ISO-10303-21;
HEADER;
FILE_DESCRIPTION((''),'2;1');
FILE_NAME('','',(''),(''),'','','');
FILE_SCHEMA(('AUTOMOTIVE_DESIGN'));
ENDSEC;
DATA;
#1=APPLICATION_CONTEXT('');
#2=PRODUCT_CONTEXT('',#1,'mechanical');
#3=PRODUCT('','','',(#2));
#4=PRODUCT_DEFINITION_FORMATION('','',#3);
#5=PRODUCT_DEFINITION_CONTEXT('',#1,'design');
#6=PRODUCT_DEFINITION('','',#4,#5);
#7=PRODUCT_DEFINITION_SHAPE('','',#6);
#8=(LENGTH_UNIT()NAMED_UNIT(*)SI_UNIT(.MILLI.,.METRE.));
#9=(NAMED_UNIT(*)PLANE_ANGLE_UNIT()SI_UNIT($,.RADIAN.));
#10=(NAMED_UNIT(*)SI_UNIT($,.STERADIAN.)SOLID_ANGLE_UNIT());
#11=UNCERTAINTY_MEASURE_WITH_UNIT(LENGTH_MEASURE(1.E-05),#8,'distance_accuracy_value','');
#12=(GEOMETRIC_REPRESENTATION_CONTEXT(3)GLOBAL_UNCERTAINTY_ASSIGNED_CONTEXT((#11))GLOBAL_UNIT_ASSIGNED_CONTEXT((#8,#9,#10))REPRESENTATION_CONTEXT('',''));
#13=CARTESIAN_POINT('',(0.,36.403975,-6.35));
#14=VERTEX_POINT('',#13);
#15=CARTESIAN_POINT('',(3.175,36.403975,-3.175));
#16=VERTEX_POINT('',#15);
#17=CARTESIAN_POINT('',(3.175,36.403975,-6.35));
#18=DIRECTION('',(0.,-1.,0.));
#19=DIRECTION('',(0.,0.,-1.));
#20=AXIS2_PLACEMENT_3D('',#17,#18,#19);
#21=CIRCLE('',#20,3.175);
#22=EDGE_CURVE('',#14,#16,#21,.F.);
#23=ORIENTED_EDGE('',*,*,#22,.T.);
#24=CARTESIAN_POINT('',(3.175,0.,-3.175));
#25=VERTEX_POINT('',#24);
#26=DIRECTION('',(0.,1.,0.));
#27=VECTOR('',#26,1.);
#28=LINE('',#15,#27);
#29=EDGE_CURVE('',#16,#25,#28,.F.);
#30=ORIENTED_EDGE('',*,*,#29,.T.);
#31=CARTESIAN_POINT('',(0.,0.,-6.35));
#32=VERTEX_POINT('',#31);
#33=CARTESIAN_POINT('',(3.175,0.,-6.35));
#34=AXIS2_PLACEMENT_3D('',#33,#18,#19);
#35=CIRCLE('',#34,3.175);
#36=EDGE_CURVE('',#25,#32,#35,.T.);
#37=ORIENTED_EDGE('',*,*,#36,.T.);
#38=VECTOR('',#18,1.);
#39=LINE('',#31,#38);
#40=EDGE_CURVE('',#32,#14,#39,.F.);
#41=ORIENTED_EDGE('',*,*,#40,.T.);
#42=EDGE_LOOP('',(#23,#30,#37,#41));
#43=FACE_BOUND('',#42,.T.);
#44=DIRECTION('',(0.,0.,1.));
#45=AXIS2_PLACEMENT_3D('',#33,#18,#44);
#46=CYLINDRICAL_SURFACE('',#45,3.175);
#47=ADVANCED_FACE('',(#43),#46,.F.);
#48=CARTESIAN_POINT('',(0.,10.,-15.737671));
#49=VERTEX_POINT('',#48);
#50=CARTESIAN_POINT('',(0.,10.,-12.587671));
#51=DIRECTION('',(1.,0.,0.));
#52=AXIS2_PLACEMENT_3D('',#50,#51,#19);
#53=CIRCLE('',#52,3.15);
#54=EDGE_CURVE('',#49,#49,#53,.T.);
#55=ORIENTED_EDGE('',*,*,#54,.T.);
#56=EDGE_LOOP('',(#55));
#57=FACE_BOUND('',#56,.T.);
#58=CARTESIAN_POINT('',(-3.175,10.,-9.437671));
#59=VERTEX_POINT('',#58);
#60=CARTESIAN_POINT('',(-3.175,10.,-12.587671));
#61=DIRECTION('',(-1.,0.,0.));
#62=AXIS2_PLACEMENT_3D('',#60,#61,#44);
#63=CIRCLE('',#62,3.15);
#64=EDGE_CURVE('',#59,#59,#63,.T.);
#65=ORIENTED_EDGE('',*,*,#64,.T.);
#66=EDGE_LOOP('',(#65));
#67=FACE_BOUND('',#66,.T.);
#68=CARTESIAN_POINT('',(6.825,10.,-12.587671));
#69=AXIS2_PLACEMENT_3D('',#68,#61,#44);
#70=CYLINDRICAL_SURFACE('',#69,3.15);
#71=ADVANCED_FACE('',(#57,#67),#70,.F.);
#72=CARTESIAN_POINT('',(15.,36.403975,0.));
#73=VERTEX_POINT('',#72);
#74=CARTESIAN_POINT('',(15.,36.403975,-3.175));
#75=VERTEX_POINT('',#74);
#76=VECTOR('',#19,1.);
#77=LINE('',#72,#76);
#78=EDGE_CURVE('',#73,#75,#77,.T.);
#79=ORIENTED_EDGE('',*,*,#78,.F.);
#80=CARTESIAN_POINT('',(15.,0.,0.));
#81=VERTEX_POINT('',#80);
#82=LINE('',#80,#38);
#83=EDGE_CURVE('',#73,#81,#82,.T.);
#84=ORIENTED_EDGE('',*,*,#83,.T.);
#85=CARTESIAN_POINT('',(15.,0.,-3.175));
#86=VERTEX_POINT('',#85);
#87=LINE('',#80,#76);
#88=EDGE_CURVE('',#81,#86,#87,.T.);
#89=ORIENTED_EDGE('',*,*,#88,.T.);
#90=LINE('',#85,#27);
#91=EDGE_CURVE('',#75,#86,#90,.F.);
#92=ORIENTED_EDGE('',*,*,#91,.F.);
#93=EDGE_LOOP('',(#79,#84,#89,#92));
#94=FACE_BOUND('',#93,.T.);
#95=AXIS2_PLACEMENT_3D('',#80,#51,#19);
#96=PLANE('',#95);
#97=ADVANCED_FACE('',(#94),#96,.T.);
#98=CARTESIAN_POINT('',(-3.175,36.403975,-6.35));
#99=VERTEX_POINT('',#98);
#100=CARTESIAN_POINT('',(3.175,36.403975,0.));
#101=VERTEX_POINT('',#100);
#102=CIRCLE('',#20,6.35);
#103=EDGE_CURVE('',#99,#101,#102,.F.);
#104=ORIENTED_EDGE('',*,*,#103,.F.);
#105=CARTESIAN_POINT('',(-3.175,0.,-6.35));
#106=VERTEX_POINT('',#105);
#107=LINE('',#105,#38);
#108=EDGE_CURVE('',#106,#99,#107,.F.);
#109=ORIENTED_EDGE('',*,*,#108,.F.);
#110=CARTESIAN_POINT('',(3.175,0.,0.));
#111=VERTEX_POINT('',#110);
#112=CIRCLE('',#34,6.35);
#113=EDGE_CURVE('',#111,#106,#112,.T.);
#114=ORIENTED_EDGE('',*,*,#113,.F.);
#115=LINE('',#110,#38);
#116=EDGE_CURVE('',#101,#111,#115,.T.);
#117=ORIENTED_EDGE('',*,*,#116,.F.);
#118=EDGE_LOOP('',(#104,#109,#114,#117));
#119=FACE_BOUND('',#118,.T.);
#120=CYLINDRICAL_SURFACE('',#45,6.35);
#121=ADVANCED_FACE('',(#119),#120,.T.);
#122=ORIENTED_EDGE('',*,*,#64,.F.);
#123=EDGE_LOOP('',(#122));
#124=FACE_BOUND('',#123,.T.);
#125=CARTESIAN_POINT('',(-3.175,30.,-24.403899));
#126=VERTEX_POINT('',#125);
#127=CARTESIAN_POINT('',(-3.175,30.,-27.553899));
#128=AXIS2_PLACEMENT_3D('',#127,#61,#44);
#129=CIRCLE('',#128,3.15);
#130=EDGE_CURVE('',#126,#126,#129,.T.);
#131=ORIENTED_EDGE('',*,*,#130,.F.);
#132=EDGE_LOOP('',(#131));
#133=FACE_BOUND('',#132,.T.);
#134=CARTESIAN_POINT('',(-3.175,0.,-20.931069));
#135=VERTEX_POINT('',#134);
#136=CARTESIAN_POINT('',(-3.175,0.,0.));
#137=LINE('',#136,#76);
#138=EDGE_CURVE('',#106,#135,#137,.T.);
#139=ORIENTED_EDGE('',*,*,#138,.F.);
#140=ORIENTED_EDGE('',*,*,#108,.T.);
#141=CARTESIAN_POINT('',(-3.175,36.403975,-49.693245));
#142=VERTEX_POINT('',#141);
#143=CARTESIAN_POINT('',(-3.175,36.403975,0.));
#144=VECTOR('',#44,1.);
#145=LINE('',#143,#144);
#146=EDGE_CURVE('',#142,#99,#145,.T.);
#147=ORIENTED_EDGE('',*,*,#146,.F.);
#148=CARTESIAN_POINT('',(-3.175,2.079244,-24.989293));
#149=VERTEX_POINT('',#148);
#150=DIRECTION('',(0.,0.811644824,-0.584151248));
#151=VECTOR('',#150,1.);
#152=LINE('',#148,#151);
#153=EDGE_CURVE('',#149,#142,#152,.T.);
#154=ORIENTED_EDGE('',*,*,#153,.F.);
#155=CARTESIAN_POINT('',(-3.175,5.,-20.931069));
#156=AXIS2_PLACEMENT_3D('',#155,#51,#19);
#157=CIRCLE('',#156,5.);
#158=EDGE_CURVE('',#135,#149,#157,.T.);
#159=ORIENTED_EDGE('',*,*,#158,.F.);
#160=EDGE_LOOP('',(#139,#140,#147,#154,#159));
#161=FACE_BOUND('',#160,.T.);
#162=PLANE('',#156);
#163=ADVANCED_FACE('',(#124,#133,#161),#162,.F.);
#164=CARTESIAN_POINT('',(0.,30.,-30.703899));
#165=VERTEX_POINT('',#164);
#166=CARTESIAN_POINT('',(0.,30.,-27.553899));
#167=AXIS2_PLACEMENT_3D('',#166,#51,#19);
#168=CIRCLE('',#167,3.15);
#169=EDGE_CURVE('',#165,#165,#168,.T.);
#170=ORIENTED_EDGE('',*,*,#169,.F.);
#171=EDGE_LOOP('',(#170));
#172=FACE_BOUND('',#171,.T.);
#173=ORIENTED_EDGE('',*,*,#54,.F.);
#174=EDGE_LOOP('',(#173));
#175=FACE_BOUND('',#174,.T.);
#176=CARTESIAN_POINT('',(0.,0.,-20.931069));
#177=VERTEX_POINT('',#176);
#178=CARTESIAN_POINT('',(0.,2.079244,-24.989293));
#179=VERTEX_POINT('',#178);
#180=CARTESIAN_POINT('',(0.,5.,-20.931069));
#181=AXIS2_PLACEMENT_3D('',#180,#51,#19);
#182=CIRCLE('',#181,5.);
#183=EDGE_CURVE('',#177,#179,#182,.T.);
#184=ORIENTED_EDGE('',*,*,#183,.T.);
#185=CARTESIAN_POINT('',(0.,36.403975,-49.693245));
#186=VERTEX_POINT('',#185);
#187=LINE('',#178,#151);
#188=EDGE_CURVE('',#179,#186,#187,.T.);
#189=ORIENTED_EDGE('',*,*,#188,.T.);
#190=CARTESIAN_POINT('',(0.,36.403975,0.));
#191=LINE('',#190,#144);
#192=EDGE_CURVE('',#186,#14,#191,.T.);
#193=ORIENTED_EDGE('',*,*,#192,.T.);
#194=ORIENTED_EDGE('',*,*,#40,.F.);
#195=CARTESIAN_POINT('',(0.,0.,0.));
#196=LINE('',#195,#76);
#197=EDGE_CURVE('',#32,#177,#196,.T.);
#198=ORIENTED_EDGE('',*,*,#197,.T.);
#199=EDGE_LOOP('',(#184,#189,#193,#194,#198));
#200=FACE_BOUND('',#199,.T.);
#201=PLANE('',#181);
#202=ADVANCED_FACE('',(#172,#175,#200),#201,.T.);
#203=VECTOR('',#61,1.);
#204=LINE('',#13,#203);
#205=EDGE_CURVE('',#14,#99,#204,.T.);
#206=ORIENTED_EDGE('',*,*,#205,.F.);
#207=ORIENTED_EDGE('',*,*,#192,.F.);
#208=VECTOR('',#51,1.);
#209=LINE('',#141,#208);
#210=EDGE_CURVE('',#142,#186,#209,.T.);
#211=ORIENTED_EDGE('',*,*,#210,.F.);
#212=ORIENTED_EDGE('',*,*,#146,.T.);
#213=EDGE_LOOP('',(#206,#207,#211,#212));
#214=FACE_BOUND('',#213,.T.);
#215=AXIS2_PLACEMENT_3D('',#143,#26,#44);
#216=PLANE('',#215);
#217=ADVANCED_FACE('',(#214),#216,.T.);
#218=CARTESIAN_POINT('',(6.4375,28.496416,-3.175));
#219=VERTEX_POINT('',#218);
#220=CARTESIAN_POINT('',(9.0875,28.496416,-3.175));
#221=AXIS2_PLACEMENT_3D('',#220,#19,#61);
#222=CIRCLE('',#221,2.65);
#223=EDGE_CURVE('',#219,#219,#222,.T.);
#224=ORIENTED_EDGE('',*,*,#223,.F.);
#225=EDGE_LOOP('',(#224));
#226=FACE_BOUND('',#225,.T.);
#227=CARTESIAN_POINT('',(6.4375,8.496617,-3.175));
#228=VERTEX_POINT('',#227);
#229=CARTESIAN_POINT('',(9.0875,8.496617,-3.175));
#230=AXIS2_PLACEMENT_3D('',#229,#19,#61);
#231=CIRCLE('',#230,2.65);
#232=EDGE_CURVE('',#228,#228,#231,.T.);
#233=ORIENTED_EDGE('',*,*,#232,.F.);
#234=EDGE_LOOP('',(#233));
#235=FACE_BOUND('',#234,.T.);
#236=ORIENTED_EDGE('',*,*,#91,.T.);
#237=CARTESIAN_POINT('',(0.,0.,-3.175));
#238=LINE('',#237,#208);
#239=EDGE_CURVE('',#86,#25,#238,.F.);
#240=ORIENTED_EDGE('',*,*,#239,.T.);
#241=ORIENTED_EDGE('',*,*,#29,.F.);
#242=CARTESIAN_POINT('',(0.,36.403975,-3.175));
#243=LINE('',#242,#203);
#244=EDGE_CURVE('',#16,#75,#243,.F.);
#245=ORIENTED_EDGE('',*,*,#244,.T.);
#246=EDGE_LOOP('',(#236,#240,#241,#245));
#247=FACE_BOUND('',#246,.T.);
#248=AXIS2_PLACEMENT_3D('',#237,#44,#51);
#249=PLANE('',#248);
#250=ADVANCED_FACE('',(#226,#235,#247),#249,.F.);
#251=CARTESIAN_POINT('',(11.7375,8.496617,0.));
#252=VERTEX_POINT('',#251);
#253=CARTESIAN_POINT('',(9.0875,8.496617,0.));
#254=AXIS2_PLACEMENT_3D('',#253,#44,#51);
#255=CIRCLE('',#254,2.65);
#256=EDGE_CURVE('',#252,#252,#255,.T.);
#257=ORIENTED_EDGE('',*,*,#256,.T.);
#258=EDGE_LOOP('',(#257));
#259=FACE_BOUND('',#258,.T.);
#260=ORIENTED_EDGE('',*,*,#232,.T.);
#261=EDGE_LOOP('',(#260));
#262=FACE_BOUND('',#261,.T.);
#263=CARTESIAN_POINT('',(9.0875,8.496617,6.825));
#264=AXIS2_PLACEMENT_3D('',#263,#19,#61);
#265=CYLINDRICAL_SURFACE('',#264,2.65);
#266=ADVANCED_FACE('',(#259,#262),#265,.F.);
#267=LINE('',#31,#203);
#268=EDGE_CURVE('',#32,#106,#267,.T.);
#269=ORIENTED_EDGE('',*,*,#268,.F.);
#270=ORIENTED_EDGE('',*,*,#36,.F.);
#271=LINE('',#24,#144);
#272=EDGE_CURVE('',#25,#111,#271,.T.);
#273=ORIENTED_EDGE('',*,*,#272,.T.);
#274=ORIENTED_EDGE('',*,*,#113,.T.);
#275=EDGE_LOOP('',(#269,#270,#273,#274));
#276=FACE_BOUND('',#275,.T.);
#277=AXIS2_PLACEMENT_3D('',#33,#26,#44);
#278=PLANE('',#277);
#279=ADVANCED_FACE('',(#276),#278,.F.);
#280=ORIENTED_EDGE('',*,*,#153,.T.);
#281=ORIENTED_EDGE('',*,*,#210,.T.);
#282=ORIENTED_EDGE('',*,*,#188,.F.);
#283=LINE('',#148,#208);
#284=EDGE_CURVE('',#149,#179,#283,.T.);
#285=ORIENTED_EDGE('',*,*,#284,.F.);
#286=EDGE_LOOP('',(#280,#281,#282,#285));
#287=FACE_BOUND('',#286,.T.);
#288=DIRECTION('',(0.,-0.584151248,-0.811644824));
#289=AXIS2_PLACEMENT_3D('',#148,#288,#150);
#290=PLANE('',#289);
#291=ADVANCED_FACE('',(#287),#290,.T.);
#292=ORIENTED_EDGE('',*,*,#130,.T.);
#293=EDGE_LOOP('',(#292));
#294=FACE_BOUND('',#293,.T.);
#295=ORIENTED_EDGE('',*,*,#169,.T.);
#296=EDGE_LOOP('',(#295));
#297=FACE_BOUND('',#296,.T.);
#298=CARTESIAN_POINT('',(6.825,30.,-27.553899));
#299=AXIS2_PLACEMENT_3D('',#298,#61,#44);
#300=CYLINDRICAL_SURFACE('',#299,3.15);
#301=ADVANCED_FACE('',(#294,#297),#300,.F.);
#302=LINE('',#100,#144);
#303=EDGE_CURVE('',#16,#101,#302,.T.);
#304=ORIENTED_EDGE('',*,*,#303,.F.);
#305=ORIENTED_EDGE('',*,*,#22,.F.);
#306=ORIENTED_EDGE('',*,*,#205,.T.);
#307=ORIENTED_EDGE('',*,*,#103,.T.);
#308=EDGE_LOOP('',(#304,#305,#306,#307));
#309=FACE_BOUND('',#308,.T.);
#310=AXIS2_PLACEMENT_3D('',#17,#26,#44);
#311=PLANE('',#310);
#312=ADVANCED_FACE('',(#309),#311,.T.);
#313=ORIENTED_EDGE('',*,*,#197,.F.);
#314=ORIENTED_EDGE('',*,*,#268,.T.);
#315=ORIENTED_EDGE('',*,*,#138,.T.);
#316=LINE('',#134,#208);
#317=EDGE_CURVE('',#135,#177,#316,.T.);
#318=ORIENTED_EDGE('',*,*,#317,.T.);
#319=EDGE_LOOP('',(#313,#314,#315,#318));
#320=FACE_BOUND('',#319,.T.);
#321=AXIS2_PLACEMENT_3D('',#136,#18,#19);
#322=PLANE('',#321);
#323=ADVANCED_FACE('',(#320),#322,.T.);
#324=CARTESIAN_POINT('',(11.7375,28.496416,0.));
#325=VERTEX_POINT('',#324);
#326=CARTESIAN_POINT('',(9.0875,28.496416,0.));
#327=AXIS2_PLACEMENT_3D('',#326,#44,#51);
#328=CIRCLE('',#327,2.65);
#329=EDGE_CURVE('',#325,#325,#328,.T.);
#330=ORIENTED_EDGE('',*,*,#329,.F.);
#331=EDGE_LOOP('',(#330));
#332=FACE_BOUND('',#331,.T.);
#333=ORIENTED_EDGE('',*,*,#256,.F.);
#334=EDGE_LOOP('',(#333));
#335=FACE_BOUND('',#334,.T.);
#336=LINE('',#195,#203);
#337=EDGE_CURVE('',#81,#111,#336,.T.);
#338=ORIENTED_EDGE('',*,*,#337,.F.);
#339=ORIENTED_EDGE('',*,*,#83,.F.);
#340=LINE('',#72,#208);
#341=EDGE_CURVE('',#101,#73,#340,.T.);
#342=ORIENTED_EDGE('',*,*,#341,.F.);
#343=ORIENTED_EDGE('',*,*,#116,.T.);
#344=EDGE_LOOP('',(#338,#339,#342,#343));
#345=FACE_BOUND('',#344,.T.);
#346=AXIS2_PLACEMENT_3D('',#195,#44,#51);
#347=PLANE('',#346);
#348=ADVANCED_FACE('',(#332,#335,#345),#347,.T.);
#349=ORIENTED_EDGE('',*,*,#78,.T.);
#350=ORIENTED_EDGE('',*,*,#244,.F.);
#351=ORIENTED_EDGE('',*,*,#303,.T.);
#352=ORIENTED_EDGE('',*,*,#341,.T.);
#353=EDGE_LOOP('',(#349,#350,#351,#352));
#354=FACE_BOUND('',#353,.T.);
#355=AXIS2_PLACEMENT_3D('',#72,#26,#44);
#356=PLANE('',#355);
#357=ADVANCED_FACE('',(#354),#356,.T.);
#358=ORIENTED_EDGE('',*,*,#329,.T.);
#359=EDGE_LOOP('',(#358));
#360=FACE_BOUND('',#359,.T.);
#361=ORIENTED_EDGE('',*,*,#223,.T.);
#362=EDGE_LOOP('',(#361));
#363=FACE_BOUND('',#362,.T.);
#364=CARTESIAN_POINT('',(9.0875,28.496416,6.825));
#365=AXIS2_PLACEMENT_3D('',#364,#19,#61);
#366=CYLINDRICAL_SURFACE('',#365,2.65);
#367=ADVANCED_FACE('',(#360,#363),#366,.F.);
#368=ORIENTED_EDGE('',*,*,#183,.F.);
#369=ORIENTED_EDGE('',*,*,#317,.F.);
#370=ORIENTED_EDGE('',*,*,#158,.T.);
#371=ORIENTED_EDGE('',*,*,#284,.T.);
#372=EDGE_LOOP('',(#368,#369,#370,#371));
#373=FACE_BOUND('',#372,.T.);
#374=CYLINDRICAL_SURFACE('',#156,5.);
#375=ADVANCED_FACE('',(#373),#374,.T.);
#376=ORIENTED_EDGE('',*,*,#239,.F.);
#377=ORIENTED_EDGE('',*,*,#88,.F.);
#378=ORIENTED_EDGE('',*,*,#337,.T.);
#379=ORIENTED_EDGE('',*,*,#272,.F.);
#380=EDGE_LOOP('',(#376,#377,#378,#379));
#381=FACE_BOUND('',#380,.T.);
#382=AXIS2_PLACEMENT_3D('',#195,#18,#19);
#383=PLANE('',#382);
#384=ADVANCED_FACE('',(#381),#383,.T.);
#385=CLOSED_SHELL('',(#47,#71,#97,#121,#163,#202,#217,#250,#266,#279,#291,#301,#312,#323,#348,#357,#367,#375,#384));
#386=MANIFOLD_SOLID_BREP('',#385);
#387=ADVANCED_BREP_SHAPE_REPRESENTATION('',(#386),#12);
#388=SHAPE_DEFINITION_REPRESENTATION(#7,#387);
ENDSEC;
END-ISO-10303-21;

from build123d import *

# Parameters (mm, degrees)
BASE_FLANGE1_DEPTH           = 3.175
SKETCH7_R                    = 3.15
CUT_EXTRUDE3_DEPTH           = 10
EDGE_FLANGE1_STRIP_W         = 19.05
EDGE_FLANGE1_STRIP_H         = 3.175
EDGE_FLANGE1_STRIP_CUT_DEPTH = 36.40397533
EDGE_FLANGE1_DEPTH           = 36.40397533
SKETCH12_R                   = 2.65
CUT_EXTRUDE4_DEPTH           = 10


# Sheet-metal steps are written as plain solids
with BuildPart() as part:
    # Sketch2 → Base-Flange1 (new body)
    with BuildSketch(Plane(origin=(0, 0, 0), x_dir=(0, 0, -1), z_dir=(1, 0, 0))):
        with BuildLine():
            Line((0, 0), (0, 36.40397533))
            Line((0, 36.40397533), (49.693245392, 36.40397533))
            Line((49.693245392, 36.40397533), (24.989293369, 2.07924376))
            ThreePointArc((24.989293369, 2.07924376), (23.211005522, 0.550068473), (20.931069251, 0))
            Line((20.931069251, 0), (0, 0))
        make_face()
    extrude(amount=-BASE_FLANGE1_DEPTH)

    # Sketch7 → Cut-Extrude3 (cut)
    with BuildSketch(Plane.ZY.offset(3.175)):
        with Locations((-27.553898694, 30)):
            Circle(SKETCH7_R)
        with Locations((-12.587671369, 10)):
            Circle(SKETCH7_R)
    extrude(amount=-CUT_EXTRUDE3_DEPTH, mode=Mode.SUBTRACT)

    # Edge-Flange1 strip (across the edge) → Edge-Flange1 strip cut (cut)
    with BuildSketch(Plane(origin=(0, 36.40397533, 0), x_dir=(0, 0, -1), z_dir=(0, -1, 0))):
        with Locations((-3.175, -1.5875)):
            Rectangle(EDGE_FLANGE1_STRIP_W, EDGE_FLANGE1_STRIP_H)
    extrude(amount=EDGE_FLANGE1_STRIP_CUT_DEPTH, mode=Mode.SUBTRACT)

    # Edge-Flange1 section (across the edge) → Edge-Flange1 (add)
    with BuildSketch(Plane(origin=(0, 36.40397533, 0), x_dir=(0, 0, -1), z_dir=(0, -1, 0))):
        with BuildLine():
            Line((0, 3.175), (0, 15))
            Line((0, 15), (3.175, 15))
            Line((3.175, 15), (3.175, 3.175))
            ThreePointArc((3.175, 3.175), (4.10493597, 0.92993597), (6.35, 0))
            Line((6.35, 0), (6.35, -3.175))
            ThreePointArc((6.35, -3.175), (1.859871939, -1.315128061), (0, 3.175))
        make_face()
    extrude(amount=EDGE_FLANGE1_DEPTH)

    # Sketch12 → Cut-Extrude4 (cut)
    with BuildSketch(Plane(origin=(0, 0, -3.175), x_dir=(-1, 0, 0), z_dir=(0, 0, -1))):
        with Locations((-9.0875, 28.496416241)):
            Circle(SKETCH12_R)
        with Locations((-9.0875, 8.49661674)):
            Circle(SKETCH12_R)
    extrude(amount=-CUT_EXTRUDE4_DEPTH, mode=Mode.SUBTRACT)


solid = part.part
